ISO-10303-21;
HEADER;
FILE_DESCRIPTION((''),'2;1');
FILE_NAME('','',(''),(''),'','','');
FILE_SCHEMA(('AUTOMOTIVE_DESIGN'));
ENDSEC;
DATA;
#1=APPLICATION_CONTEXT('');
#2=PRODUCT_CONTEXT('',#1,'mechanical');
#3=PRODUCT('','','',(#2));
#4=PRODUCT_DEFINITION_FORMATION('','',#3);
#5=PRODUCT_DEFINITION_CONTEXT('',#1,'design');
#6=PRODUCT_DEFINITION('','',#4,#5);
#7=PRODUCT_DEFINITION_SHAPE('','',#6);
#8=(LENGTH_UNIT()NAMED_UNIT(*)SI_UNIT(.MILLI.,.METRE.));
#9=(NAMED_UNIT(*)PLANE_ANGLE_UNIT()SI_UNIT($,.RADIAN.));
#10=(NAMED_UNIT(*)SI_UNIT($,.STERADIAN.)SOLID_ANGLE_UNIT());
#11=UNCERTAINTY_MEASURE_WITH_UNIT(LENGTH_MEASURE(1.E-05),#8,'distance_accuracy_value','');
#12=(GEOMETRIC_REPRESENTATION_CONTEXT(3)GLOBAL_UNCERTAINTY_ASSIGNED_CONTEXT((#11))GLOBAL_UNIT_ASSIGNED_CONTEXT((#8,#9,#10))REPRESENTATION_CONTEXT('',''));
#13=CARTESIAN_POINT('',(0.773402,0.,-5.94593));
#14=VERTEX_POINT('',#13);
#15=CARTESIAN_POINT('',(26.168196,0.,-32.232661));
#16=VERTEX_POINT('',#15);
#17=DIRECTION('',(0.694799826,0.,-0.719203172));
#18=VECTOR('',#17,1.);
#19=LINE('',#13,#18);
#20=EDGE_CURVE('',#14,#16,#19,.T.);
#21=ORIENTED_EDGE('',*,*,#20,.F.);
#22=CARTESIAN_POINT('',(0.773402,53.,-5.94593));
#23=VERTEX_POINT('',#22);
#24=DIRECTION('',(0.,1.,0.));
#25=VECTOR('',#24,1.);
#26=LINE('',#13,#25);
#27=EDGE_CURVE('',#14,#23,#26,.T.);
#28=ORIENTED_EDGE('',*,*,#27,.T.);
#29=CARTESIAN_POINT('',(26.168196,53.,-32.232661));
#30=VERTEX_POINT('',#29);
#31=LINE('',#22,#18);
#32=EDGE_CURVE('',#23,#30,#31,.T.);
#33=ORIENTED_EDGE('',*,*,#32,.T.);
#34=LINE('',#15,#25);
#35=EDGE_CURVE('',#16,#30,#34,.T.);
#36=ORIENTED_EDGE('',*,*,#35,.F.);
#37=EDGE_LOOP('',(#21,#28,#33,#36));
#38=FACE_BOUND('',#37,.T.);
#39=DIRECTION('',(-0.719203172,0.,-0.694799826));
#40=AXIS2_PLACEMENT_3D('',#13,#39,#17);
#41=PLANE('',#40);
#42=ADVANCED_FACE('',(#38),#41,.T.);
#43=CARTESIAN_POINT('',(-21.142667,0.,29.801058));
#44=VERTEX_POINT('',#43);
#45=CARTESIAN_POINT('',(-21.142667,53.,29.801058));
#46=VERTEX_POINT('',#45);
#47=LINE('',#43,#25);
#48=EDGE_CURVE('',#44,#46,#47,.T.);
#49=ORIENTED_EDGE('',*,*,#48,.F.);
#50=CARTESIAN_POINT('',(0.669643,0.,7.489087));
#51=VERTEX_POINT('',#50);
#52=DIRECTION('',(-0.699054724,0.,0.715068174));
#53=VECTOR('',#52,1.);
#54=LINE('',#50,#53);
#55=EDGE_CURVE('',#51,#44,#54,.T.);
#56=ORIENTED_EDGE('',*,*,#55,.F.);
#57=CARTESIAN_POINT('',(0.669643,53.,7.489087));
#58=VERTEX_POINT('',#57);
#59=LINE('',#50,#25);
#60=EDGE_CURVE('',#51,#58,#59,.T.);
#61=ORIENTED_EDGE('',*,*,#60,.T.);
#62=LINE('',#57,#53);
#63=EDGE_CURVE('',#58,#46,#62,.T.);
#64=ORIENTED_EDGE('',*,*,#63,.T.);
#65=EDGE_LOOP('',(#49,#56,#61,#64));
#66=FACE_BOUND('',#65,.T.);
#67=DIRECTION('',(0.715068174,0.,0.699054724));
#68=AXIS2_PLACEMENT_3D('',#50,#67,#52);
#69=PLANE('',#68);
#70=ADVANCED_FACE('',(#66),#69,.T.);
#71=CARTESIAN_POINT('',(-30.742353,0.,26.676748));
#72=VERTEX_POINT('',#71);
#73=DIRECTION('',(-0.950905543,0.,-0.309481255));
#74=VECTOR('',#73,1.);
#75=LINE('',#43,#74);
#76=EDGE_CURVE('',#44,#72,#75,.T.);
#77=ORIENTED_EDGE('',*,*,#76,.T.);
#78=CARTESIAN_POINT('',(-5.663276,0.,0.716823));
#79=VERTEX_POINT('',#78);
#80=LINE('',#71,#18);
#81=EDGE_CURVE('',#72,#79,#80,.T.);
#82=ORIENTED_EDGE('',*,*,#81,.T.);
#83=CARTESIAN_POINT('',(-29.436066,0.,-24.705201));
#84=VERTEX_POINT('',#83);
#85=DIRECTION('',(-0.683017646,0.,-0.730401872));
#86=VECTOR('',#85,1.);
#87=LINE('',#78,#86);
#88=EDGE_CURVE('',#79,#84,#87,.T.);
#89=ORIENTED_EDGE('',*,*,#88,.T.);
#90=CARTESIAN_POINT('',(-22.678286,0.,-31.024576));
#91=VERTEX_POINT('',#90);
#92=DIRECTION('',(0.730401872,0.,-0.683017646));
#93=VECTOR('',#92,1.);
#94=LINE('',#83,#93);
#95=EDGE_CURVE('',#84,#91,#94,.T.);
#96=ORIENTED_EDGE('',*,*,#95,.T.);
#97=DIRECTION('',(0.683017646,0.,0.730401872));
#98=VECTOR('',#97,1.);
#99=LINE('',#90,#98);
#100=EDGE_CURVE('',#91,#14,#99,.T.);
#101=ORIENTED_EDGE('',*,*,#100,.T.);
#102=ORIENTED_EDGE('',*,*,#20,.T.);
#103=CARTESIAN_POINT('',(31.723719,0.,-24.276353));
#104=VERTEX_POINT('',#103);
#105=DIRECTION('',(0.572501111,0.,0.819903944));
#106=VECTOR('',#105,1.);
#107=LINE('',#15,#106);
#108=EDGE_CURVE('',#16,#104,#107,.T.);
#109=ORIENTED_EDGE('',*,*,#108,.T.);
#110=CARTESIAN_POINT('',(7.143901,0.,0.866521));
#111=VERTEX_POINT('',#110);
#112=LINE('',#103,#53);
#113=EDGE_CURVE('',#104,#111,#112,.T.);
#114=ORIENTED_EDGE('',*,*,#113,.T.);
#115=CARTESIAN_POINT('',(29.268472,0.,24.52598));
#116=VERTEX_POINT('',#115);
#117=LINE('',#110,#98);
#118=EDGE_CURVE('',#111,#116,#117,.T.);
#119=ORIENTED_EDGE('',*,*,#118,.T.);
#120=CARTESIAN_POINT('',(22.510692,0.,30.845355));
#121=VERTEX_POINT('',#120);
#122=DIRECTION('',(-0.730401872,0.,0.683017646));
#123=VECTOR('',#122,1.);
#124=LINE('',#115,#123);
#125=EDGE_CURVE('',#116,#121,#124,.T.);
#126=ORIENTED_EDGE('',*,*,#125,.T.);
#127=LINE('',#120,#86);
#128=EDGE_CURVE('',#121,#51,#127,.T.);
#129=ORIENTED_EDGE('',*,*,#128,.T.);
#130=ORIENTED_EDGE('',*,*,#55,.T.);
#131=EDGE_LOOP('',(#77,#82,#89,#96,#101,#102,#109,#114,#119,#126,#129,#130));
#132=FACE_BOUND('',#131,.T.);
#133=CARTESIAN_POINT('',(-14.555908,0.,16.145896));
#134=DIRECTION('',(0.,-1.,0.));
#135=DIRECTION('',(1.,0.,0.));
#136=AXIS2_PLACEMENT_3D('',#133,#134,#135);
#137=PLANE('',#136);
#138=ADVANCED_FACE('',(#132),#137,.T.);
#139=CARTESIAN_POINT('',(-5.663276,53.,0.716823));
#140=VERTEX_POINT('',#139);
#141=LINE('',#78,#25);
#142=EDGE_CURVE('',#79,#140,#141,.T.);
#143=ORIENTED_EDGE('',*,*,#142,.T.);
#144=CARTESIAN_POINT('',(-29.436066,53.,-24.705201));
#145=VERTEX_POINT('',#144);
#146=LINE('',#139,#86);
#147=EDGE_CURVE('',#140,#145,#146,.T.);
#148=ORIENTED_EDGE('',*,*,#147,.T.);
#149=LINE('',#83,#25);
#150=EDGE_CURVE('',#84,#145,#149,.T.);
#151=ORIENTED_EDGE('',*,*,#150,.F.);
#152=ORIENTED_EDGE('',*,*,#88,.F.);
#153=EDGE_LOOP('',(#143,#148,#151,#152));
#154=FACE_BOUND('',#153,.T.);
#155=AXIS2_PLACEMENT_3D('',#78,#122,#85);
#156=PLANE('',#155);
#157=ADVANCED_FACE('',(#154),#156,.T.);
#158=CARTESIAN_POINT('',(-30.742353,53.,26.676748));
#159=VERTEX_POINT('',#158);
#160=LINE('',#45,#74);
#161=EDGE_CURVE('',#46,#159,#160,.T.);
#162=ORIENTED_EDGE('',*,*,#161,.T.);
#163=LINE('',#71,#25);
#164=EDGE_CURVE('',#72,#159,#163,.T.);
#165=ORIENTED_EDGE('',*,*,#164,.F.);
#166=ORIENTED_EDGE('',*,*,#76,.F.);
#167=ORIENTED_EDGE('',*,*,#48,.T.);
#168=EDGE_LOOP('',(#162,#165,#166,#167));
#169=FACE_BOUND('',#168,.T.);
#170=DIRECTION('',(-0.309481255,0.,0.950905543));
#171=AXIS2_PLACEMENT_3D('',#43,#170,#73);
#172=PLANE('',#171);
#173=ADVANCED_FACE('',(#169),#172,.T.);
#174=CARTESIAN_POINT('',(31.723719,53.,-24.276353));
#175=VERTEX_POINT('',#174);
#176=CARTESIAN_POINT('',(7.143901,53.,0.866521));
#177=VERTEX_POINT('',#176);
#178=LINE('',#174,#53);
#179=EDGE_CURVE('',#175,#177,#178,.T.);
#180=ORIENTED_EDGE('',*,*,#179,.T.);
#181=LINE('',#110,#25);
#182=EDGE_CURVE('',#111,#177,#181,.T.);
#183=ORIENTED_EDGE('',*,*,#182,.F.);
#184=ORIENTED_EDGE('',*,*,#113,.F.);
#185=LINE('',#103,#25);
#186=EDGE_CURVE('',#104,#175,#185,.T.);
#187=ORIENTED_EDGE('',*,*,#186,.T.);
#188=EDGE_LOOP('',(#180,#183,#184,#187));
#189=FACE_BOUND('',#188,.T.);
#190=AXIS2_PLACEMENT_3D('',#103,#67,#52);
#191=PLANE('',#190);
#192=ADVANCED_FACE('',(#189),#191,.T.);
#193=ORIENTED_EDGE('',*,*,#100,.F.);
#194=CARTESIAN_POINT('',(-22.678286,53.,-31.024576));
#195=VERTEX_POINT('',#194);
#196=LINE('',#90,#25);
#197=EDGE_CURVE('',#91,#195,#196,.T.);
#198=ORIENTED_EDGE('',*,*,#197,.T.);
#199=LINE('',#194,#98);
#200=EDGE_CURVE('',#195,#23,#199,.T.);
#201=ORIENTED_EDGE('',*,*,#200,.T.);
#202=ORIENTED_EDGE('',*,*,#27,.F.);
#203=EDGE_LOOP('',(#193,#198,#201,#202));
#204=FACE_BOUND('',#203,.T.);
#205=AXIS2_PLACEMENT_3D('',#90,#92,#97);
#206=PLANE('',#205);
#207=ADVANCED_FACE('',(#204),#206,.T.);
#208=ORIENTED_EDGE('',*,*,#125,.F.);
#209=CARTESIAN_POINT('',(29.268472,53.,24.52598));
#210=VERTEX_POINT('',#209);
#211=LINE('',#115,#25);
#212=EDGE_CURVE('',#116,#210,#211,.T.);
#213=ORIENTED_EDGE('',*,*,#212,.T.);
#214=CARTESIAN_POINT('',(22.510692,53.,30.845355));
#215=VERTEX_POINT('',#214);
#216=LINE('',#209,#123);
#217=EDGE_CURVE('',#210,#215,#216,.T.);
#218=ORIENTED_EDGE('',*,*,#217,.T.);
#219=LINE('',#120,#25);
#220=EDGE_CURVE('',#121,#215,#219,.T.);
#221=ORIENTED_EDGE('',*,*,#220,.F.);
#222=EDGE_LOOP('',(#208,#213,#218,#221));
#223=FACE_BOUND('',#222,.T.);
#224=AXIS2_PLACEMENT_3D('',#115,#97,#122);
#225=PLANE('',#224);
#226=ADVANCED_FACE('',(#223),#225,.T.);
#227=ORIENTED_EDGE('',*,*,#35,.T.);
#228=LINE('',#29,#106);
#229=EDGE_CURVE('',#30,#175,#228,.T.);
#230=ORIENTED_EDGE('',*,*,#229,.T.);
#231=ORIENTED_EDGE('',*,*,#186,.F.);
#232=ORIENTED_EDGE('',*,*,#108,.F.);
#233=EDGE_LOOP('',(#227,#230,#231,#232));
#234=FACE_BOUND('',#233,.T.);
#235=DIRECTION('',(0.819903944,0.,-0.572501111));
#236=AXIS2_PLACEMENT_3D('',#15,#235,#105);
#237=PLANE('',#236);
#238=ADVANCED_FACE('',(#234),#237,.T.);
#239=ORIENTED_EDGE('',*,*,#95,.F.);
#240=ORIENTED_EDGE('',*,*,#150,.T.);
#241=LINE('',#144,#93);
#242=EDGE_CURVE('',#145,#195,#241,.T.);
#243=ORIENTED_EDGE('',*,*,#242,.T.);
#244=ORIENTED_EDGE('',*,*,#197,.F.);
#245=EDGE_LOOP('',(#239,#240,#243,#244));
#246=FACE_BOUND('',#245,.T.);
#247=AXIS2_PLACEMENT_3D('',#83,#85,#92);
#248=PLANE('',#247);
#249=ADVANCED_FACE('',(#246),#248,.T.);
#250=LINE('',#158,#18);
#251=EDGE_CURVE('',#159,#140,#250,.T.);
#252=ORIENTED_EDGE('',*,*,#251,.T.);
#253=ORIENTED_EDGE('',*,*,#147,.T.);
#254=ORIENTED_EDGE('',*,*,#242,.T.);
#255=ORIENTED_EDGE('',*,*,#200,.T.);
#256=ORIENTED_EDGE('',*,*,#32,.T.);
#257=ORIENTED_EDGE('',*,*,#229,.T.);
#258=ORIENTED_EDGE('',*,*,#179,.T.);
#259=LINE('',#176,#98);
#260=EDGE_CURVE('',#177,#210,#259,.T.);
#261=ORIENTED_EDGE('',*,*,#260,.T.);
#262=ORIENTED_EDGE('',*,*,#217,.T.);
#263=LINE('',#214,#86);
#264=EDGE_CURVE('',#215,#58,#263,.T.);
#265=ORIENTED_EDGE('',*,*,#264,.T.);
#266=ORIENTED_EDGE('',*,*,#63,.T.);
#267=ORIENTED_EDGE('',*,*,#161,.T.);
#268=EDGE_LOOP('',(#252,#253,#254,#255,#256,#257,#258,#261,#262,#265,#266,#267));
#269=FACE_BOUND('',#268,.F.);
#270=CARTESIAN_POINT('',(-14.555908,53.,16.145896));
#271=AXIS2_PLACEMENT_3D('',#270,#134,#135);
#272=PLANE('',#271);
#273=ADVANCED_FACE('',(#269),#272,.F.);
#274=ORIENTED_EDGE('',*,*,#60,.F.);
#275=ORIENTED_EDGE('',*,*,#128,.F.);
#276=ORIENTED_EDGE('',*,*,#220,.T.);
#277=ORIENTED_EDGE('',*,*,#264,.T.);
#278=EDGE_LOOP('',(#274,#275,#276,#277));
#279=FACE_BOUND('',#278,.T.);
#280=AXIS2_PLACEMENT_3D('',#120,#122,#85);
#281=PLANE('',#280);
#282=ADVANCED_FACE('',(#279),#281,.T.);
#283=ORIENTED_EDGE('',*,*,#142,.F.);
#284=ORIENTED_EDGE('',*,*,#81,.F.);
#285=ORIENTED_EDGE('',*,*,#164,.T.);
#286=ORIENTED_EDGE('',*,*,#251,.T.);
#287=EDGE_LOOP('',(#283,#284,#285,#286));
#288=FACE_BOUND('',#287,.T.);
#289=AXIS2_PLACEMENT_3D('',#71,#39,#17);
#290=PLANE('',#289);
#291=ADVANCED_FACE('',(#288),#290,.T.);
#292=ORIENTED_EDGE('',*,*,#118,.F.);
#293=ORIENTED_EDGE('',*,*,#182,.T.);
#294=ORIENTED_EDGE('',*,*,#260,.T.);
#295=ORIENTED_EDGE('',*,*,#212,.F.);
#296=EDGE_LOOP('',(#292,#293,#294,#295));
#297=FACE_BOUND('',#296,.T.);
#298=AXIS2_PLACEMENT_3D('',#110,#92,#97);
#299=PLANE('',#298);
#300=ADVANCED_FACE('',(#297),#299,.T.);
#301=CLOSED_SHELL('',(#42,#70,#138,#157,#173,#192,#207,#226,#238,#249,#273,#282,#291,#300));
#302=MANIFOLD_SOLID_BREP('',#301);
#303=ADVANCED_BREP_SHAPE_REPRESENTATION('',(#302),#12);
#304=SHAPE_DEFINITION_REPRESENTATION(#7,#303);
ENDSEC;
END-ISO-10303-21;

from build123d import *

# Parameters (mm, degrees)
F1_DEPTH = 53


# Not quite as in the source:
# - a feature names something its author has since deleted; it is built from what else it names


with BuildPart() as f1:
    # F0 (on Front) → F1 (new body)
    with BuildSketch(Plane.XZ):
        Polygon((-30.7423530247, 26.6767482577), (-5.6632759116, 0.7168226163), (0.6696432283, 7.4890868759), (-21.1426665217, 29.8010575561), align=None)
        Polygon((7.143901395, 0.8665209922), (29.2684723572, 24.5259800626), (22.5106922376, 30.8453547093), (0.6696432283, 7.4890868759), align=None)
        Polygon((0.7734024336, -5.9459301822), (26.1681957986, -32.2326609282), (31.7237185496, -24.2763531905), (7.143901395, 0.8665209922), align=None)
        Polygon((-5.6632759116, 0.7168226163), (0.7734024336, -5.9459301822), (7.143901395, 0.8665209922), (0.6696432283, 7.4890868759), align=None)
        Polygon((-29.4360663926, -24.7052009039), (-22.678286273, -31.0245755505), (0.7734024336, -5.9459301822), (-5.6632759116, 0.7168226163), align=None)
    extrude(amount=-F1_DEPTH)


solid = f1.part
